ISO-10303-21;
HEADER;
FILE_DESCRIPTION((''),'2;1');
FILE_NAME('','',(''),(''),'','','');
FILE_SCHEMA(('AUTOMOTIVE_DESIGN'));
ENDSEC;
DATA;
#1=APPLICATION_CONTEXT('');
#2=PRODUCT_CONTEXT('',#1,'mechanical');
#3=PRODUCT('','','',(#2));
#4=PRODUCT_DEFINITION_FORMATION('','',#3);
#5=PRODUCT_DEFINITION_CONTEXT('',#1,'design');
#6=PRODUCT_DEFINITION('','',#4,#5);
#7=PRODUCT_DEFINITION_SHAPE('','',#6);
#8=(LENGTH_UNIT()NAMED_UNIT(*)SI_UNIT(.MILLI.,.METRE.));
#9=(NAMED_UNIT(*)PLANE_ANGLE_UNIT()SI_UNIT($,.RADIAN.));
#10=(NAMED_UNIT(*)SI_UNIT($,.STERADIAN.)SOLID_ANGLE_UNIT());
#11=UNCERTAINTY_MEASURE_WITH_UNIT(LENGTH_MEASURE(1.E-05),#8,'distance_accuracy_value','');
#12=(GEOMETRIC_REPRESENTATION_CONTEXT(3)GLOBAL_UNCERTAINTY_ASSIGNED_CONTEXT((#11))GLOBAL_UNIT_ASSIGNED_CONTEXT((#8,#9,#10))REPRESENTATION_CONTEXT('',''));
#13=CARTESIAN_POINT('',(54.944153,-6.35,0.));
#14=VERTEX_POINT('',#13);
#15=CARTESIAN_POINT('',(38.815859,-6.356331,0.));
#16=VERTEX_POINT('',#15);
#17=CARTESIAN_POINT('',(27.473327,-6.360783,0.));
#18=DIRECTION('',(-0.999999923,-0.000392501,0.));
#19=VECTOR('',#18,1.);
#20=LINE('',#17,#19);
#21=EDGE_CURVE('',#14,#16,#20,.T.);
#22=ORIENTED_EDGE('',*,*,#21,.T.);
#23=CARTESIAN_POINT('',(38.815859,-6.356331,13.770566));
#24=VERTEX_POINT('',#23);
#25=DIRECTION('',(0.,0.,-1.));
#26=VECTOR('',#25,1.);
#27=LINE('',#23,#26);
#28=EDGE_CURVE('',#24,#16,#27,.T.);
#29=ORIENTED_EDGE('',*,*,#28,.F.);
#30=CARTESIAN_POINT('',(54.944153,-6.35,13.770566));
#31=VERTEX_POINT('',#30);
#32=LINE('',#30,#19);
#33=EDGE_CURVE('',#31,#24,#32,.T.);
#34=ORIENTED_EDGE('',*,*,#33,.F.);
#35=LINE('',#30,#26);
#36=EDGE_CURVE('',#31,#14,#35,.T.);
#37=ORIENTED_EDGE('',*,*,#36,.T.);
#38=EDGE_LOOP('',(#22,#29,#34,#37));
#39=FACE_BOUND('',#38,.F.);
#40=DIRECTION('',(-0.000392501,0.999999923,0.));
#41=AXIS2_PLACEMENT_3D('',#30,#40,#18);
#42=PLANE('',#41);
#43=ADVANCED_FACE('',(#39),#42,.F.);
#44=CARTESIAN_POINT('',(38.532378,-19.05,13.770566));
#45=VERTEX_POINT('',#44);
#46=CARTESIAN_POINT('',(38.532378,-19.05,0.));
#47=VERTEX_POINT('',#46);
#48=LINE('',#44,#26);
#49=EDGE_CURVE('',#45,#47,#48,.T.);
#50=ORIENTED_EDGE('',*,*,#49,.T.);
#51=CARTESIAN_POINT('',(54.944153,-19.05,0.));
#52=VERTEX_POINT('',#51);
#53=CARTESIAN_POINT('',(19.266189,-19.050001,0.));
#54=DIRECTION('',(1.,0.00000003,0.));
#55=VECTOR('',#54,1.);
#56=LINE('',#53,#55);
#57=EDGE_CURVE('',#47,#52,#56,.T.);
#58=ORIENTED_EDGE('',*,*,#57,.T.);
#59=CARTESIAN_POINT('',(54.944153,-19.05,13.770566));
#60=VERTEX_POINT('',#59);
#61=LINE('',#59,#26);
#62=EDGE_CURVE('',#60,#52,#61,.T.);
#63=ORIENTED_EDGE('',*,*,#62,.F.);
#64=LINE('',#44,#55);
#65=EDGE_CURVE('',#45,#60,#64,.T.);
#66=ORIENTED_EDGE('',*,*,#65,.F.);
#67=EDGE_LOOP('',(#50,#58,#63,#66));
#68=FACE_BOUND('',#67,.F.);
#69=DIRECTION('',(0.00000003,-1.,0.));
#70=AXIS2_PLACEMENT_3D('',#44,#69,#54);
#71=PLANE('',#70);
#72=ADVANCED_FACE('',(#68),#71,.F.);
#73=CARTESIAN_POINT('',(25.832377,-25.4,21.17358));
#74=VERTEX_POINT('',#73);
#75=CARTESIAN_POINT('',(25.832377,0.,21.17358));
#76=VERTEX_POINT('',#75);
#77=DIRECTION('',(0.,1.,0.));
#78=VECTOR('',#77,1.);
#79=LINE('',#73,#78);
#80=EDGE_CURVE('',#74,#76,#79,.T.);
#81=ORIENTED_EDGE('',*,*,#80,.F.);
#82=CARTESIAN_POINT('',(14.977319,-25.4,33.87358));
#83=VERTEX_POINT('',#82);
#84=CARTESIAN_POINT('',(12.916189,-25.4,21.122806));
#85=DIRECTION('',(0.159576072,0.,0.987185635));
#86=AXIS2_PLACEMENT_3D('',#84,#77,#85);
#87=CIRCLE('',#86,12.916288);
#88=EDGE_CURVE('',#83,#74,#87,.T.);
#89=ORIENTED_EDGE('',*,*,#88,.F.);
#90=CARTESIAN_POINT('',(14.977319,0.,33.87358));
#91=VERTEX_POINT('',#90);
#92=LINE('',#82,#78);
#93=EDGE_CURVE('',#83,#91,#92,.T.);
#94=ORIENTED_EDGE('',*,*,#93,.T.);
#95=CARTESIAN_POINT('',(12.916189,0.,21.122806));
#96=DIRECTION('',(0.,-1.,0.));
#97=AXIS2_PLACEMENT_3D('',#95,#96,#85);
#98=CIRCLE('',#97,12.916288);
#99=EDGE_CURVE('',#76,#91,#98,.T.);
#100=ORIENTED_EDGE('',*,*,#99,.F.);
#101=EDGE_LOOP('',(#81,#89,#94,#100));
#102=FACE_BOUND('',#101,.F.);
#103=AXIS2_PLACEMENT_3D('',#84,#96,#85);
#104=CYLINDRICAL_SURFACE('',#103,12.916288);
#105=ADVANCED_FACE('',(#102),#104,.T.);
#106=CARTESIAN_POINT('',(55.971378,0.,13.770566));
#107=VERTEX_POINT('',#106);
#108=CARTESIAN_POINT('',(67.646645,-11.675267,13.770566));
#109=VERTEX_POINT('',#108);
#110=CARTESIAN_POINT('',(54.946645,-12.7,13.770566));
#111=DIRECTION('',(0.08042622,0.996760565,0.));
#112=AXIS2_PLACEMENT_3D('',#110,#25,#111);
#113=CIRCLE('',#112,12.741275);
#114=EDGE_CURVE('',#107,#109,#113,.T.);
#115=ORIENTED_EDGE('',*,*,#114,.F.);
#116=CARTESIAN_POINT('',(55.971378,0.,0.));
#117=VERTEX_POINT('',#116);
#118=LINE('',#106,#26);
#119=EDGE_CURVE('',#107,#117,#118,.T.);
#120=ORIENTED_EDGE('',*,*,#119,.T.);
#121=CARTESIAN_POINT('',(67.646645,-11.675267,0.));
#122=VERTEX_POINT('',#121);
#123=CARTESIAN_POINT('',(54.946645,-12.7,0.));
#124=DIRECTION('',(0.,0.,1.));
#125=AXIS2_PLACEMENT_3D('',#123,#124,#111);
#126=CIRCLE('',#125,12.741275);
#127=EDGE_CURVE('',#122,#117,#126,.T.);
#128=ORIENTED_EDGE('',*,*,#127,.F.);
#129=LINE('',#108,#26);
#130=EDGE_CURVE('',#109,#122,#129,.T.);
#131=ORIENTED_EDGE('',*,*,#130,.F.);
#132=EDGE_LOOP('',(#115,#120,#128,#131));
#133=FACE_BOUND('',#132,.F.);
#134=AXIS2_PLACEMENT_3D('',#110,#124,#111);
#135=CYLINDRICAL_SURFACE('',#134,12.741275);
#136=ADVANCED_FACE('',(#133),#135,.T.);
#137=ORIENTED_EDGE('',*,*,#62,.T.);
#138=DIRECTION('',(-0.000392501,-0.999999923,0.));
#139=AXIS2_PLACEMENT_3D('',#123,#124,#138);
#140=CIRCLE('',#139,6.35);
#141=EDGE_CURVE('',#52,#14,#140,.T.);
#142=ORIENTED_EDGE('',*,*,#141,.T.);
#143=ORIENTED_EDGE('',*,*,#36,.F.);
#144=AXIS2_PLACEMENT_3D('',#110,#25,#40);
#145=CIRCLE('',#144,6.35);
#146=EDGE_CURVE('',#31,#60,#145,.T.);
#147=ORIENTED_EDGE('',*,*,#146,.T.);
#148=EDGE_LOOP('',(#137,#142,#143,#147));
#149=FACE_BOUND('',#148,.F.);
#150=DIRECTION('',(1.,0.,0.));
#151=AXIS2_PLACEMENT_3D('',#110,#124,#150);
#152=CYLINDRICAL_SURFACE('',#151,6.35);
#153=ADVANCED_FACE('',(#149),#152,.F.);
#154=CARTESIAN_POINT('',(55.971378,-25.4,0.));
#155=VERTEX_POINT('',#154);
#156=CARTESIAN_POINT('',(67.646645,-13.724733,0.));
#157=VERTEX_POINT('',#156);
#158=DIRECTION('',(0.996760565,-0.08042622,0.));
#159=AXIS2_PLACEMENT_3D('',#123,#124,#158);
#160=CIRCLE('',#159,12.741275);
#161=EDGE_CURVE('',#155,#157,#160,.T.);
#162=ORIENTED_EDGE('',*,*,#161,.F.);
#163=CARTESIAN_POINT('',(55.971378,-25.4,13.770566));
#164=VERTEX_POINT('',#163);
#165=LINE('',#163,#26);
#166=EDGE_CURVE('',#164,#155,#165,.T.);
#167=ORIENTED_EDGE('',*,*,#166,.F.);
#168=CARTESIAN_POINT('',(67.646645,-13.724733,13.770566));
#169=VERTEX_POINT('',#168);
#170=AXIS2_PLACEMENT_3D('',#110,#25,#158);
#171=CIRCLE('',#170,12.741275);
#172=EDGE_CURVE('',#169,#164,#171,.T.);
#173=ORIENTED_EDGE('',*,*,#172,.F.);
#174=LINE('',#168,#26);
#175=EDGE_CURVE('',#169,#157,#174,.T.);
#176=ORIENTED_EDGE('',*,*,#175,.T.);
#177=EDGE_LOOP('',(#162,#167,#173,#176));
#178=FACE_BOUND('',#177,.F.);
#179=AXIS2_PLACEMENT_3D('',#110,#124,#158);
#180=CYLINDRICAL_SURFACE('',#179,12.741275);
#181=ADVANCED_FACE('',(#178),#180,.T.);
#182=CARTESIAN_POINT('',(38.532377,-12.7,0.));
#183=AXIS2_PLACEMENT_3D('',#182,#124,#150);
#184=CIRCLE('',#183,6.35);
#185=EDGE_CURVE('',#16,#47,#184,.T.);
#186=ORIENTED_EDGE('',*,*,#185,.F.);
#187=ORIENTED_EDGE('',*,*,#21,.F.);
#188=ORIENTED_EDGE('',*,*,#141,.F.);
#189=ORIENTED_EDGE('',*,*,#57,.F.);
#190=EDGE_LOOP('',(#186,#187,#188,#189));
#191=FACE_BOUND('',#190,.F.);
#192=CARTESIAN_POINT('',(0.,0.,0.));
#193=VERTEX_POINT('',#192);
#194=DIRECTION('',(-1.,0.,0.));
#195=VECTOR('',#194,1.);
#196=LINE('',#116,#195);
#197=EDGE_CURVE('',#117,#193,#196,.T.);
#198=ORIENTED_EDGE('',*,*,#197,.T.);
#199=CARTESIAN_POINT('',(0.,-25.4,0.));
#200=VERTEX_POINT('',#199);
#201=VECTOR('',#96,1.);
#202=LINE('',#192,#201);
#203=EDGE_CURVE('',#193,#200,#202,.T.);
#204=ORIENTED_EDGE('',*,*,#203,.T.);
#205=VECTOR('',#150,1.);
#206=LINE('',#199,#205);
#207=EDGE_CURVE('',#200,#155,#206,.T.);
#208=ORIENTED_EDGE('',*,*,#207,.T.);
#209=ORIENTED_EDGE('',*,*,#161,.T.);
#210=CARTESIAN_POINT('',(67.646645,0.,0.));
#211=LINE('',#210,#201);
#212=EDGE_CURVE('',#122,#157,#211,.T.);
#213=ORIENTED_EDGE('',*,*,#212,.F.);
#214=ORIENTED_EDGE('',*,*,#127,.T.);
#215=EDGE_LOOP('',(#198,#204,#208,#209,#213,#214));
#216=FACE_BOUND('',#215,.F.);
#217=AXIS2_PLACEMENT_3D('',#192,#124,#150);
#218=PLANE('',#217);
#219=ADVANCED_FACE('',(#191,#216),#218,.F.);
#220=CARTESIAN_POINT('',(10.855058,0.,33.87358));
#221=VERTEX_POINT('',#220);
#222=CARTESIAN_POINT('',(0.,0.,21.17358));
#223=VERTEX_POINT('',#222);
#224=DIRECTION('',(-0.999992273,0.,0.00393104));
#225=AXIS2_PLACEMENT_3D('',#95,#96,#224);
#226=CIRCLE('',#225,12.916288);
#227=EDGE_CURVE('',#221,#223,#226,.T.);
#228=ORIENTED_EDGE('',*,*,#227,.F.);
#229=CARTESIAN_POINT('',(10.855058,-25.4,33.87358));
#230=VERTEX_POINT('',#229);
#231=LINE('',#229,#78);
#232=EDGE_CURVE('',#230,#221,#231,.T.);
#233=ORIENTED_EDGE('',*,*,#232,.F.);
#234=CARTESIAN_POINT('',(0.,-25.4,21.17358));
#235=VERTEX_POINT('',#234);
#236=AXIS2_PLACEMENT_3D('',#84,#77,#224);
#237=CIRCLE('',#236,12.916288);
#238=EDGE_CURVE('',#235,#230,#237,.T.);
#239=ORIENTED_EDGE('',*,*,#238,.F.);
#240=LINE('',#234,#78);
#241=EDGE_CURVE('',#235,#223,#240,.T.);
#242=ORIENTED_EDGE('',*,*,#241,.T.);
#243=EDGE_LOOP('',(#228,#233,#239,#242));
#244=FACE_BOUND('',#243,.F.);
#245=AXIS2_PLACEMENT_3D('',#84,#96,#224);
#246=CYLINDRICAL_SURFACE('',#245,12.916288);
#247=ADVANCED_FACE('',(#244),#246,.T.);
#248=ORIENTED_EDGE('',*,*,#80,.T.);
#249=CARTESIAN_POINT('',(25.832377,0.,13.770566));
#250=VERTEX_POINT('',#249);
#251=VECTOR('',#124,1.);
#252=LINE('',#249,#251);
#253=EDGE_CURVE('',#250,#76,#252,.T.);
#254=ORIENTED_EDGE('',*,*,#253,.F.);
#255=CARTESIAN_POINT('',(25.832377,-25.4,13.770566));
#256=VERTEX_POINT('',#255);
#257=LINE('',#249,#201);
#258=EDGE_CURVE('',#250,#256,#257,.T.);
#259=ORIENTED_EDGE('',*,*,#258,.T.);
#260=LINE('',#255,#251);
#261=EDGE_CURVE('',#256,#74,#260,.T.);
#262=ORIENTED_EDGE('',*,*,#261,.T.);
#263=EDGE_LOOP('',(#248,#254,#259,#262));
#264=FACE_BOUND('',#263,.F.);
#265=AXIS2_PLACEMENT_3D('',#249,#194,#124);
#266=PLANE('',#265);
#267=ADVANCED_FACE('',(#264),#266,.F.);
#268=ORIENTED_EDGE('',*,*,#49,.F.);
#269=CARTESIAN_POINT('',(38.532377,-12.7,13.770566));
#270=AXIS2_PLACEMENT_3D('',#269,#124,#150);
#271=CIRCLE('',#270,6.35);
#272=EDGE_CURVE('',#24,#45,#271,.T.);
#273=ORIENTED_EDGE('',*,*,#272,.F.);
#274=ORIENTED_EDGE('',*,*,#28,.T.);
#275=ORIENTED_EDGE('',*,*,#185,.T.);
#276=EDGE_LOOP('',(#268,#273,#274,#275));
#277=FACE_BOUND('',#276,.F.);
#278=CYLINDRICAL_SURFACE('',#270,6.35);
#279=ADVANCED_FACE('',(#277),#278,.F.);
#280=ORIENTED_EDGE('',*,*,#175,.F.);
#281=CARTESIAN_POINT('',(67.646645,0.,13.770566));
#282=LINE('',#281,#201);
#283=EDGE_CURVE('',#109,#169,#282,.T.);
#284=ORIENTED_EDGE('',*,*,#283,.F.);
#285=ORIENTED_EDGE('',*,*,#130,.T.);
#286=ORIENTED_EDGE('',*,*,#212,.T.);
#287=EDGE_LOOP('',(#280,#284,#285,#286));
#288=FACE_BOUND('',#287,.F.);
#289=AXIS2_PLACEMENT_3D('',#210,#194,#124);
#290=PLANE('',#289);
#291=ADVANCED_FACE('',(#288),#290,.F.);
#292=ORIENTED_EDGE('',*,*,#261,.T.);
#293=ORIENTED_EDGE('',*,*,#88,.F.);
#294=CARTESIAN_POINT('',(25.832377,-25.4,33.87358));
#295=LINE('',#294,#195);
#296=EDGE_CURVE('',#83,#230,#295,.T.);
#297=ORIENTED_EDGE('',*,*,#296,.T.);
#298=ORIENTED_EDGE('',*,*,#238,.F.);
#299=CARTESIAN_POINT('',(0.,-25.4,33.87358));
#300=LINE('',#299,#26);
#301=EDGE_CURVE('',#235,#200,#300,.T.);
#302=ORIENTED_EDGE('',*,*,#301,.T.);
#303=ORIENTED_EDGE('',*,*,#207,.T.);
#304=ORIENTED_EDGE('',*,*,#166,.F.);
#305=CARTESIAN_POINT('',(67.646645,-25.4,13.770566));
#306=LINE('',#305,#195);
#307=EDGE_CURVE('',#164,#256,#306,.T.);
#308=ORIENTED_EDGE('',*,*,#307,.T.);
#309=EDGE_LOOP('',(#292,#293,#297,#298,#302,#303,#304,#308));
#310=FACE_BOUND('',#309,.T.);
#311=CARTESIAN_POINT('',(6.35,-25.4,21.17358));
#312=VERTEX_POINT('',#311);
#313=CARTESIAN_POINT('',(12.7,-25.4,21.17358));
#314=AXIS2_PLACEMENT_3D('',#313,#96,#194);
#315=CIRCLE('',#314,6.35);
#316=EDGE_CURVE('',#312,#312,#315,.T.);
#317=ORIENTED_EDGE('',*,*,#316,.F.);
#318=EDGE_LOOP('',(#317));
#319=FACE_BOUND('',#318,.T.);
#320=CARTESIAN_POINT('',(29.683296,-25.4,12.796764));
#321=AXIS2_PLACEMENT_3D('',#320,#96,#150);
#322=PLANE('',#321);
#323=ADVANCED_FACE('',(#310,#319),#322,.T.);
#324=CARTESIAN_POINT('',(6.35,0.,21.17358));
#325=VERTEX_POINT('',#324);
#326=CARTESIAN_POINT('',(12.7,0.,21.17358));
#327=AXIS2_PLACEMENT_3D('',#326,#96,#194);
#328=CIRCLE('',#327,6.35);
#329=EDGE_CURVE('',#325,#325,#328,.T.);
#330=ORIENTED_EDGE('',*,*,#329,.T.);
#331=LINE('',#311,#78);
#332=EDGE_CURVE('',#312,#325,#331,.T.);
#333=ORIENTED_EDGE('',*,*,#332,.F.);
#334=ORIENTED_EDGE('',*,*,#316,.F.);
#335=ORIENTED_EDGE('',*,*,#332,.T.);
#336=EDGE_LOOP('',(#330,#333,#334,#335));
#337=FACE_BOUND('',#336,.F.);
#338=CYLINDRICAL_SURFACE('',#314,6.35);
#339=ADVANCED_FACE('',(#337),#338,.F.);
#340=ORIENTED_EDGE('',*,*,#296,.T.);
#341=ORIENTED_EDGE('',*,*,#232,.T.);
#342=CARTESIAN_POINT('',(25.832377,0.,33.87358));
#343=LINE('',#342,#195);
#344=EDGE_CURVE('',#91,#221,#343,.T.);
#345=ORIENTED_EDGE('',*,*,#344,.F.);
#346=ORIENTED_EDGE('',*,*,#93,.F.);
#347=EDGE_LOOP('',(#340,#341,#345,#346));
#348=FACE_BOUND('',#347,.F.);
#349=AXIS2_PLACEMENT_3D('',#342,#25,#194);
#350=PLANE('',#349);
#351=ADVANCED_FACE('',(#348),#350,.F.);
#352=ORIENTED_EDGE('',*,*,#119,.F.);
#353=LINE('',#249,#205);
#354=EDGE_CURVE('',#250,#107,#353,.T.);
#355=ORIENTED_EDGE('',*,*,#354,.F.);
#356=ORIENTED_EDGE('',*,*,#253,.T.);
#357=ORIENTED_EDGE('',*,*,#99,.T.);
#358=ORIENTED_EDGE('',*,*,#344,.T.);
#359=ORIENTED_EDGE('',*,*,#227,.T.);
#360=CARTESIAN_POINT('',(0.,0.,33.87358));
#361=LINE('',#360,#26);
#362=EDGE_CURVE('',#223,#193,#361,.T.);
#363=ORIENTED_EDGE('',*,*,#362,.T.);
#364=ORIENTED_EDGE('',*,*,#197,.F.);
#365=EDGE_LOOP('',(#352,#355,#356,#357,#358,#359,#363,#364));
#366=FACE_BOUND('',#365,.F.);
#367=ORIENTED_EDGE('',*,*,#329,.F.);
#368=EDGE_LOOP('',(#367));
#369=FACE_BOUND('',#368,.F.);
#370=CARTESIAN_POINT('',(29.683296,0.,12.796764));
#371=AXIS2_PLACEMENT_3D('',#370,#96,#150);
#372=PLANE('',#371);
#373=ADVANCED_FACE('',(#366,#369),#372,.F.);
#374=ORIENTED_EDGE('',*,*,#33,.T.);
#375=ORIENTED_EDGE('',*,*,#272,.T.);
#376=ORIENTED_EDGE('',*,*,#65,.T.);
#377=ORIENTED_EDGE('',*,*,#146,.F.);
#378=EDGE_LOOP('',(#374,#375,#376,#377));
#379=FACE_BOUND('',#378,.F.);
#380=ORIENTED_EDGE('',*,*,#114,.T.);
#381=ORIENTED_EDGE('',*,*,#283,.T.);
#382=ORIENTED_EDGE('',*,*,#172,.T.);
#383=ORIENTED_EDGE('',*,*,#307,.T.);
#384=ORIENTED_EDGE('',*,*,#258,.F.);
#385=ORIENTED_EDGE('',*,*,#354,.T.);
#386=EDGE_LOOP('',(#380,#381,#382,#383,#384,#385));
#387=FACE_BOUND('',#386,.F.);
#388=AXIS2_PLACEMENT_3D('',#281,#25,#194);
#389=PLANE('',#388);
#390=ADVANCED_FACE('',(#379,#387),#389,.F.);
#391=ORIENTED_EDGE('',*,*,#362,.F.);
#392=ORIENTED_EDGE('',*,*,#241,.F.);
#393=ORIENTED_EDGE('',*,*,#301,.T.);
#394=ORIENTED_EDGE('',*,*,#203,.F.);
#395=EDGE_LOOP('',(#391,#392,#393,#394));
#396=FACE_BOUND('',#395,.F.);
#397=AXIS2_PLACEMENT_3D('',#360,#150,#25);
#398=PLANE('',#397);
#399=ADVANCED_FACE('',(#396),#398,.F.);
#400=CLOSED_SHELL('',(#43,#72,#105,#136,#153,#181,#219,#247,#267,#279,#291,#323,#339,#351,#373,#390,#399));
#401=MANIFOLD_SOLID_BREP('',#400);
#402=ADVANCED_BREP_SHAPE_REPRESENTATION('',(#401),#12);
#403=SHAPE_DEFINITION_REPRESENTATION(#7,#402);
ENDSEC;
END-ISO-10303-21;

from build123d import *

# Parameters (mm, degrees)
F1_DEPTH = 25.4
F3_DEPTH = 50.8
F4_R     = 6.35
F5_DEPTH = 13.7715663219
F7_DEPTH = 13.7715663219
F9_DEPTH = 13.7715663219


with BuildPart() as f1:
    # F0 (on Front) → F1 (new body)
    with BuildSketch(Plane.XZ):
        Polygon((0, 33.8735803962), (0, 0), (67.6466450095, 0), (67.6466450095, 13.7705663219), (25.8323773742, 13.7705663219), (25.8323773742, 33.8735803962), align=None)
    extrude(amount=F1_DEPTH)

    # F2 (on face) → F3 (cut)
    with BuildSketch(Plane.XZ.offset(25.4)):
        with BuildLine():
            Line((0, 33.8735803962), (0, 21.1735803962))
            ThreePointArc((0, 21.1735803962), (3.0977100292, 29.5149442417), (10.8550581005, 33.8735803962))
            Line((10.8550581005, 33.8735803962), (0, 33.8735803962))
        make_face()
        with BuildLine():
            ThreePointArc((19.05, 21.1735803962), (12.7, 27.5235803962), (6.35, 21.1735803962))
            Line((6.35, 21.1735803962), (12.7, 21.1735803962))
            Line((12.7, 21.1735803962), (19.05, 21.1735803962))
        make_face()
        with BuildLine():
            Line((12.7, 21.1735803962), (6.35, 21.1735803962))
            ThreePointArc((6.35, 21.1735803962), (12.7, 14.8235803962), (19.05, 21.1735803962))
            Line((19.05, 21.1735803962), (12.7, 21.1735803962))
        make_face()
        with BuildLine():
            Line((25.8323773742, 33.8735803962), (14.9773192737, 33.8735803962))
            ThreePointArc((14.9773192737, 33.8735803962), (22.734667345, 29.5149442417), (25.8323773742, 21.1735803962))
            Line((25.8323773742, 21.1735803962), (25.8323773742, 33.8735803962))
        make_face()
    extrude(amount=-F3_DEPTH, mode=Mode.SUBTRACT)

    # F4 (on face) → F5 (cut, through all)
    with BuildSketch(Plane.XY.offset(13.7705663219)):
        with Locations((38.5323773742, -12.7)):
            Circle(F4_R)
        with Locations((54.9466450095, -12.7)):
            Circle(F4_R)
    extrude(amount=-F5_DEPTH, mode=Mode.SUBTRACT)

    # F6 (on face) → F7 (cut, through all)
    with BuildSketch(Plane.XY.offset(13.7705663219)):
        with BuildLine():
            Line((54.9441526312, -6.3500004891), (38.8158588696, -6.3563308534))
            ThreePointArc((38.8158588696, -6.3563308534), (43.121636982, -8.3112420605), (44.8823773742, -12.7))
            ThreePointArc((44.8823773742, -12.7), (43.0225055016, -17.1901279936), (38.5323775634, -19.05))
            Line((38.5323775634, -19.05), (54.9441526312, -19.0499995109))
            ThreePointArc((54.9441526312, -19.0499995109), (48.5966450095, -12.7), (54.9441526312, -6.3500004891))
        make_face()
    extrude(amount=-F7_DEPTH, mode=Mode.SUBTRACT)

    # F8 (on face) → F9 (cut, through all)
    with BuildSketch(Plane.XY.offset(13.7705663219)):
        with BuildLine():
            ThreePointArc((55.9713775557, 0), (63.9560866346, -3.6905583749), (67.6466450095, -11.6752674539))
            Line((67.6466450095, -11.6752674539), (67.6466450095, 0))
            Line((67.6466450095, 0), (55.9713775557, 0))
        make_face()
        with BuildLine():
            Line((67.6466450095, -25.4), (67.6466450095, -13.7247325461))
            ThreePointArc((67.6466450095, -13.7247325461), (63.9560866346, -21.7094416251), (55.9713775557, -25.4))
            Line((55.9713775557, -25.4), (67.6466450095, -25.4))
        make_face()
        with BuildLine():
            Line((53.9219124634, 0), (55.9713775557, 0))
            ThreePointArc((55.9713775557, 0), (54.9466450095, 0.0412745356), (53.9219124634, 0))
        make_face()
    extrude(amount=-F9_DEPTH, mode=Mode.SUBTRACT)


solid = f1.part
